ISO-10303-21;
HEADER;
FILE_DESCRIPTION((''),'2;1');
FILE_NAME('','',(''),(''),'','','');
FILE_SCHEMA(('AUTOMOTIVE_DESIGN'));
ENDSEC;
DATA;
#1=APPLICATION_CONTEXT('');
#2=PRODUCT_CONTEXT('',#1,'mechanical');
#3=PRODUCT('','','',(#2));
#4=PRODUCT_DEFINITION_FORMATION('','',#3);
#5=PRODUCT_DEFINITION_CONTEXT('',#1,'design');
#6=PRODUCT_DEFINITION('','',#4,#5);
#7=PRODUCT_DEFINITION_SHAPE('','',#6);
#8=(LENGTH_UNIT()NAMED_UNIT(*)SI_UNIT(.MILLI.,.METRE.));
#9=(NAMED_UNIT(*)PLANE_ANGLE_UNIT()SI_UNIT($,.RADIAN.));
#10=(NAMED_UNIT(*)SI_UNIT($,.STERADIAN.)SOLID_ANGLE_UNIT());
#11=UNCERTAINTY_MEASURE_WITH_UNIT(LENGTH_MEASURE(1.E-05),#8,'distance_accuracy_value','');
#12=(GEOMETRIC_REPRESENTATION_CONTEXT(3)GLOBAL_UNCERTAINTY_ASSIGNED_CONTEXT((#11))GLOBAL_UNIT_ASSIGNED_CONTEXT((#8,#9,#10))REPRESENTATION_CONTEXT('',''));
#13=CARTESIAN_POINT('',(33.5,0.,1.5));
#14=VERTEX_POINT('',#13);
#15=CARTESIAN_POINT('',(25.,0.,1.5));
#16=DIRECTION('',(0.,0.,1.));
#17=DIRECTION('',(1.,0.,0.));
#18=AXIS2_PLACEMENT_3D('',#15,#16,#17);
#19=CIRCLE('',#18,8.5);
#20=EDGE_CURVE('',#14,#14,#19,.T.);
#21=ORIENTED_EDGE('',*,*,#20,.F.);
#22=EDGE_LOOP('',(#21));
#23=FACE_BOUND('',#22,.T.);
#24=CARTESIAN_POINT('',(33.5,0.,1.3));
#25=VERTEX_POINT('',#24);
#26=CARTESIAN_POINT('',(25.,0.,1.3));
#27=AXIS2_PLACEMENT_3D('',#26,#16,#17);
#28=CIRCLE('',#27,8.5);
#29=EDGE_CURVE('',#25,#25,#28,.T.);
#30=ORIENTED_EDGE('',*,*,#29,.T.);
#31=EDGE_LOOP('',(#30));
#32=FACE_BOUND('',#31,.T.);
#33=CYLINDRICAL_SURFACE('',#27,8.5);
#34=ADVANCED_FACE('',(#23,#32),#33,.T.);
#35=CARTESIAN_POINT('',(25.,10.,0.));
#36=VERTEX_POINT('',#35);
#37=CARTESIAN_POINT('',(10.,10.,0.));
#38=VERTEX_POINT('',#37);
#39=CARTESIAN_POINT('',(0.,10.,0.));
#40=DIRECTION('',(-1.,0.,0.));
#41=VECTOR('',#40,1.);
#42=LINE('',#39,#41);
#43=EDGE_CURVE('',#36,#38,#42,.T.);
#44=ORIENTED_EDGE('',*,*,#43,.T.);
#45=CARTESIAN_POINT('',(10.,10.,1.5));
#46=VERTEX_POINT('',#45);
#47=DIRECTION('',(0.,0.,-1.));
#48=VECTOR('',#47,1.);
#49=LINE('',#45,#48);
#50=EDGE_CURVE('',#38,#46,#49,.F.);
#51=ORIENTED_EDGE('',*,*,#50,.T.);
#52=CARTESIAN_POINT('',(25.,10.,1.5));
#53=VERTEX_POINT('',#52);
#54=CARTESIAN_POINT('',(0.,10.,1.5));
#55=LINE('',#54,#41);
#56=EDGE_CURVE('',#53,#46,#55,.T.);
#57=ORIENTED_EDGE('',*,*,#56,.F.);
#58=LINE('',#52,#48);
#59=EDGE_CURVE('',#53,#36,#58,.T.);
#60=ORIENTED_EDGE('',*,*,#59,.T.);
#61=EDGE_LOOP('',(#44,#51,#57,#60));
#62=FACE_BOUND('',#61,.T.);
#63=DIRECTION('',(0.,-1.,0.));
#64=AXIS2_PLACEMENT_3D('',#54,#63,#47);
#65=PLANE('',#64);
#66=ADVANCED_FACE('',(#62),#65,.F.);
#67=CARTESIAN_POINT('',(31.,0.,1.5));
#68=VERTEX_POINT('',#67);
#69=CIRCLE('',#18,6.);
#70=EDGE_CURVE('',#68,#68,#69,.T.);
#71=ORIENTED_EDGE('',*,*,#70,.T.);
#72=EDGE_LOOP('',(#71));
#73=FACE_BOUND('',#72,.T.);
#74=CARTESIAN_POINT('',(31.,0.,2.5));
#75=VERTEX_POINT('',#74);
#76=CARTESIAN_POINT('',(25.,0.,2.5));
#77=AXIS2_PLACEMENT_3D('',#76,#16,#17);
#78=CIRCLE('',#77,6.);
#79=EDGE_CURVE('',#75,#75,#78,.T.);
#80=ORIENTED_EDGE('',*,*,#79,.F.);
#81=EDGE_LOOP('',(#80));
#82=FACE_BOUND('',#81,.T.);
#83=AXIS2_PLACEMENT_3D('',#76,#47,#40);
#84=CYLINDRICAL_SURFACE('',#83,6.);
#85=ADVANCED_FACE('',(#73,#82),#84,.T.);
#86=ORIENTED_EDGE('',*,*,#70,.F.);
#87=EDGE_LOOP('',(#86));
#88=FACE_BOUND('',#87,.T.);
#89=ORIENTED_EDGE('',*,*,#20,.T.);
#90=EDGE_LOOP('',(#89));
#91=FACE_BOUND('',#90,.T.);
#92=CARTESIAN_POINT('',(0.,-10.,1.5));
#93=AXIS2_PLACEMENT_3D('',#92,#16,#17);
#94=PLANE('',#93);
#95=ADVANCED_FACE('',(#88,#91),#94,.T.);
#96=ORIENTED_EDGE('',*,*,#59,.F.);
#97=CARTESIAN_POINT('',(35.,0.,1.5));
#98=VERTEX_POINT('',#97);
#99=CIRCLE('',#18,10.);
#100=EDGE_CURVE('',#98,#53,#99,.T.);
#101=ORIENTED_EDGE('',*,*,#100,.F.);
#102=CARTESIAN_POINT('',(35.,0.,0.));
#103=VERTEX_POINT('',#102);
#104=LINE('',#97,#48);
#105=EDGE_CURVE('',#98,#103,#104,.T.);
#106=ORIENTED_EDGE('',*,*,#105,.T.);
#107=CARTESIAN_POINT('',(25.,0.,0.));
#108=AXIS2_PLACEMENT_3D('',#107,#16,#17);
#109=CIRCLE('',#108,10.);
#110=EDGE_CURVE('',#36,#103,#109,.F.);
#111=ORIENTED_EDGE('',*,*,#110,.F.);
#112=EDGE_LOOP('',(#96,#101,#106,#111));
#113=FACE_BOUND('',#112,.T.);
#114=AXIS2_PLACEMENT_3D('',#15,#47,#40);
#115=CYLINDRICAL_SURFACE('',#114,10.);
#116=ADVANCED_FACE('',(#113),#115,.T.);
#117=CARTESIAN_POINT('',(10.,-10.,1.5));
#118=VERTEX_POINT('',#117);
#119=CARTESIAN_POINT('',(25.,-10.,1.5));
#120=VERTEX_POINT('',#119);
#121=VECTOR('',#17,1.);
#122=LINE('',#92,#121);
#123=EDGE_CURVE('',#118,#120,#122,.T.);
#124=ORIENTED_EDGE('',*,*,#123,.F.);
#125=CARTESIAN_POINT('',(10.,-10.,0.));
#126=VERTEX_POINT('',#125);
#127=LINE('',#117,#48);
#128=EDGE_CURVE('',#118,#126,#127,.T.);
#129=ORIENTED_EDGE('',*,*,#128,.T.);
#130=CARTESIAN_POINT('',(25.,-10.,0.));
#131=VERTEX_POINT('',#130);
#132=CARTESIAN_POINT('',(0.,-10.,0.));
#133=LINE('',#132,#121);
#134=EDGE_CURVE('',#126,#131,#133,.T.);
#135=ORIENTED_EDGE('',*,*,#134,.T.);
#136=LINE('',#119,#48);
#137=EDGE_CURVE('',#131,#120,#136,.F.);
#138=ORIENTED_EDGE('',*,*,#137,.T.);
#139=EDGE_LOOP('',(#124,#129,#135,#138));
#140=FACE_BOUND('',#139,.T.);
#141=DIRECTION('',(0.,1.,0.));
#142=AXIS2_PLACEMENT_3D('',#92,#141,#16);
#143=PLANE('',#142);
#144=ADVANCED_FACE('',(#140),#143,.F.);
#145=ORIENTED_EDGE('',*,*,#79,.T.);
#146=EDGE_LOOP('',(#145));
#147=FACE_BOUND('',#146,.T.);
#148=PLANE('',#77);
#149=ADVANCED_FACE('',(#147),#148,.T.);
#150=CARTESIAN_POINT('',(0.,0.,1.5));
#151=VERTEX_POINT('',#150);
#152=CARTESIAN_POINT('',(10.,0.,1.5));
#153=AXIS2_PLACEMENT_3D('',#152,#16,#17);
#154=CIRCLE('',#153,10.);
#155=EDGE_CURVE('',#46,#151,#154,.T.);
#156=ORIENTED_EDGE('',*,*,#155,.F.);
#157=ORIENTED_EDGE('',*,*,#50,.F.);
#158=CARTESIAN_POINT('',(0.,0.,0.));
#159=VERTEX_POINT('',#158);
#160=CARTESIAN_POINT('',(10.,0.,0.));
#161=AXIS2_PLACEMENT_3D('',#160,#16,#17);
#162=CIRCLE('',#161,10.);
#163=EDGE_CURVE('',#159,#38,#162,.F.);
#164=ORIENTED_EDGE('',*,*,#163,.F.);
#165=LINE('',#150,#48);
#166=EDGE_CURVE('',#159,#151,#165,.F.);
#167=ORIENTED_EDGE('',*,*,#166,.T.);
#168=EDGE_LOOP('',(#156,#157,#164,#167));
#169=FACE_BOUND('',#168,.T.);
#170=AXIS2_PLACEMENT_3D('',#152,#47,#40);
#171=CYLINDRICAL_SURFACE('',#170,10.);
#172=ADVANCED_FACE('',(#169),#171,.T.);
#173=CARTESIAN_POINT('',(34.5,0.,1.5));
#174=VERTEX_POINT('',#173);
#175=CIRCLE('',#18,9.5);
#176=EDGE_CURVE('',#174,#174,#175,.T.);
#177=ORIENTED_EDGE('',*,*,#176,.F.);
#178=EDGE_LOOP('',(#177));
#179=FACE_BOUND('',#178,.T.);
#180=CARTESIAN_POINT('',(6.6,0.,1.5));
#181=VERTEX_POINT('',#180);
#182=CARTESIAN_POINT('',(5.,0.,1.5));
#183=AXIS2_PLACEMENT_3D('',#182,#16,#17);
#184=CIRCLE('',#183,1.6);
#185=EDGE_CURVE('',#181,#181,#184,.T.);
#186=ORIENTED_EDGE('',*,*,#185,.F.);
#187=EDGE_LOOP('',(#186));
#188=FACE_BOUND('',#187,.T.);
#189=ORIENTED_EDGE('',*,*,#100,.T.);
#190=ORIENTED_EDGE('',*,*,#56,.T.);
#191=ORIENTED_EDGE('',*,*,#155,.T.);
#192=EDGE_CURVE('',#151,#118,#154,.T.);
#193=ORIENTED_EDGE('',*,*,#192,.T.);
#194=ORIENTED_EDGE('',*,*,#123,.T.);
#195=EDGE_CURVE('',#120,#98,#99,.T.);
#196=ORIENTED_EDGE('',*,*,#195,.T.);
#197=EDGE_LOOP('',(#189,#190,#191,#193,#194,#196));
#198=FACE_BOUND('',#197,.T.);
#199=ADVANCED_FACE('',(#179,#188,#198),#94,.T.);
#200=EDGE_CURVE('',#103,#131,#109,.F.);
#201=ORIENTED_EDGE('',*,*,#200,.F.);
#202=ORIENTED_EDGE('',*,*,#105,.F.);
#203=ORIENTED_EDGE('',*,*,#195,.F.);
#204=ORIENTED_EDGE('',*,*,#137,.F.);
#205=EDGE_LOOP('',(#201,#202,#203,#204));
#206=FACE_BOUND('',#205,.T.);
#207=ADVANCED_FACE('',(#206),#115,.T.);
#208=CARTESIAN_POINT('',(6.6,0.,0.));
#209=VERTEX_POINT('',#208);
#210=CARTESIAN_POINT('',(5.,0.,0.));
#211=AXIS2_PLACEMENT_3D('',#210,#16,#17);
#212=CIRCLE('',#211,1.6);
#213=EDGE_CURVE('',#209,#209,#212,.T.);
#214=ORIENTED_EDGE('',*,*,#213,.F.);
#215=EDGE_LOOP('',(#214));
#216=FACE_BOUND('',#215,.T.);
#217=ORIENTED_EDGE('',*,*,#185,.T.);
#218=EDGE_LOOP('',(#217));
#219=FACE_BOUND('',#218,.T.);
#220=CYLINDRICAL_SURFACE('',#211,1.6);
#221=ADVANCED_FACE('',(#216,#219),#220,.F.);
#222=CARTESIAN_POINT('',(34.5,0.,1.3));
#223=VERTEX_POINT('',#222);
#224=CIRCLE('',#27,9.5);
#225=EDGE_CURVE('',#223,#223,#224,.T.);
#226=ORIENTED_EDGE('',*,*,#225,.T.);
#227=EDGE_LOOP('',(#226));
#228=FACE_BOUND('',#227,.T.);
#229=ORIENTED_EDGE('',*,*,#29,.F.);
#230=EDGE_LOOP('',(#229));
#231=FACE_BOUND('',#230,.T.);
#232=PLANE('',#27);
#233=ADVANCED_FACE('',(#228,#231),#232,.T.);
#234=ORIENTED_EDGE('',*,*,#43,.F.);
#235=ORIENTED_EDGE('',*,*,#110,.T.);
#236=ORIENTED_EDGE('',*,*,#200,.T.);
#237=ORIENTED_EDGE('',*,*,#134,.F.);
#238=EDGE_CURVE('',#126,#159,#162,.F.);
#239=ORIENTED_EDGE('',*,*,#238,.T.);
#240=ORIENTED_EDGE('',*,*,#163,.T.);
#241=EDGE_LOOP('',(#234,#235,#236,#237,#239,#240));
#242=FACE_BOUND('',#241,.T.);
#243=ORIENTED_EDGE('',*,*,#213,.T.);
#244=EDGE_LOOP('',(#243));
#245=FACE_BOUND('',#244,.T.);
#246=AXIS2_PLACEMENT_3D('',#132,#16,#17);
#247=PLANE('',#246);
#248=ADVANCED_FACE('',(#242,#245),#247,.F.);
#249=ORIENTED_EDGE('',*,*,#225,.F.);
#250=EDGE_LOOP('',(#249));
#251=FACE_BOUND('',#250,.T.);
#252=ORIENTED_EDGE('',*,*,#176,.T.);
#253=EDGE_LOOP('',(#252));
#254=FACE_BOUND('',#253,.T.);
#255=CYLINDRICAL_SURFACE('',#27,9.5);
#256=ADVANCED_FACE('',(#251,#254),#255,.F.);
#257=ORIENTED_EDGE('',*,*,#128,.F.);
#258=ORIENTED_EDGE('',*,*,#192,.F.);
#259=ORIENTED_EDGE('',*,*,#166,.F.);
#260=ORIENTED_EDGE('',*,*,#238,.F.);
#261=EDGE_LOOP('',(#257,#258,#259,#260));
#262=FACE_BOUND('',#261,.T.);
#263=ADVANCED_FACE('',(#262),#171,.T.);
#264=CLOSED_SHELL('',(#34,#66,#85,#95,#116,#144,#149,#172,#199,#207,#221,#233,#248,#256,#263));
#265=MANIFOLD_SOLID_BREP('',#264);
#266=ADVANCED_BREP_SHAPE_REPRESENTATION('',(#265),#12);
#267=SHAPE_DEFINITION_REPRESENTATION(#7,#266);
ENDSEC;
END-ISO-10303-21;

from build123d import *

# Parameters (mm, degrees)
SKETCH1_W               = 35
SKETCH1_H               = 20
BOSS_EXTRUDE1_DEPTH     = 1.5
SKETCH2_R               = 1.6
CUT_M3_HOLE_DEPTH       = 37.431442464
SKETCH3_R               = 6
BOSS_FSR_BOSS_DEPTH     = 1
FILLET1_R               = 10
SKETCH4_R               = 9.5
SKETCH4_R_2             = 8.5
CUT_EXTRUDE_THIN1_DEPTH = 0.2


with BuildPart() as part:
    # Sketch1 → Boss-Extrude1 (new body)
    with BuildSketch(Plane.XY):
        with Locations((17.5, 0)):
            Rectangle(SKETCH1_W, SKETCH1_H)
    extrude(amount=BOSS_EXTRUDE1_DEPTH)

    # Sketch2 → Cut-M3 Hole (cut, through all)
    with BuildSketch(Plane.XY.offset(1.5)):
        with Locations((5, 0)):
            Circle(SKETCH2_R)
    extrude(amount=-CUT_M3_HOLE_DEPTH, mode=Mode.SUBTRACT)

    # Sketch3 → Boss-FSR Boss (add)
    with BuildSketch(Plane.XY.offset(1.5)):
        with Locations((25, 0)):
            Circle(SKETCH3_R)
    extrude(amount=BOSS_FSR_BOSS_DEPTH)

    # Fillet1
    fillet1_edges = [part.edges().sort_by_distance(p)[0] for p in [
        (0, 10, 0.75),
        (35, 10, 0.75),
        (35, -10, 0.75),
        (0, -10, 0.75),
    ]]
    fillet(fillet1_edges, radius=FILLET1_R - 0.0001)  # a hair under: the kernel refuses the full size

    # Sketch4 → Cut-Extrude-Thin1 (cut)
    with BuildSketch(Plane.XY.offset(1.5)):
        with Locations((25, 0)):
            Circle(SKETCH4_R)
        with Locations((25, 0)):
            Circle(SKETCH4_R_2, mode=Mode.SUBTRACT)
    extrude(amount=-CUT_EXTRUDE_THIN1_DEPTH, mode=Mode.SUBTRACT)


solid = part.part
